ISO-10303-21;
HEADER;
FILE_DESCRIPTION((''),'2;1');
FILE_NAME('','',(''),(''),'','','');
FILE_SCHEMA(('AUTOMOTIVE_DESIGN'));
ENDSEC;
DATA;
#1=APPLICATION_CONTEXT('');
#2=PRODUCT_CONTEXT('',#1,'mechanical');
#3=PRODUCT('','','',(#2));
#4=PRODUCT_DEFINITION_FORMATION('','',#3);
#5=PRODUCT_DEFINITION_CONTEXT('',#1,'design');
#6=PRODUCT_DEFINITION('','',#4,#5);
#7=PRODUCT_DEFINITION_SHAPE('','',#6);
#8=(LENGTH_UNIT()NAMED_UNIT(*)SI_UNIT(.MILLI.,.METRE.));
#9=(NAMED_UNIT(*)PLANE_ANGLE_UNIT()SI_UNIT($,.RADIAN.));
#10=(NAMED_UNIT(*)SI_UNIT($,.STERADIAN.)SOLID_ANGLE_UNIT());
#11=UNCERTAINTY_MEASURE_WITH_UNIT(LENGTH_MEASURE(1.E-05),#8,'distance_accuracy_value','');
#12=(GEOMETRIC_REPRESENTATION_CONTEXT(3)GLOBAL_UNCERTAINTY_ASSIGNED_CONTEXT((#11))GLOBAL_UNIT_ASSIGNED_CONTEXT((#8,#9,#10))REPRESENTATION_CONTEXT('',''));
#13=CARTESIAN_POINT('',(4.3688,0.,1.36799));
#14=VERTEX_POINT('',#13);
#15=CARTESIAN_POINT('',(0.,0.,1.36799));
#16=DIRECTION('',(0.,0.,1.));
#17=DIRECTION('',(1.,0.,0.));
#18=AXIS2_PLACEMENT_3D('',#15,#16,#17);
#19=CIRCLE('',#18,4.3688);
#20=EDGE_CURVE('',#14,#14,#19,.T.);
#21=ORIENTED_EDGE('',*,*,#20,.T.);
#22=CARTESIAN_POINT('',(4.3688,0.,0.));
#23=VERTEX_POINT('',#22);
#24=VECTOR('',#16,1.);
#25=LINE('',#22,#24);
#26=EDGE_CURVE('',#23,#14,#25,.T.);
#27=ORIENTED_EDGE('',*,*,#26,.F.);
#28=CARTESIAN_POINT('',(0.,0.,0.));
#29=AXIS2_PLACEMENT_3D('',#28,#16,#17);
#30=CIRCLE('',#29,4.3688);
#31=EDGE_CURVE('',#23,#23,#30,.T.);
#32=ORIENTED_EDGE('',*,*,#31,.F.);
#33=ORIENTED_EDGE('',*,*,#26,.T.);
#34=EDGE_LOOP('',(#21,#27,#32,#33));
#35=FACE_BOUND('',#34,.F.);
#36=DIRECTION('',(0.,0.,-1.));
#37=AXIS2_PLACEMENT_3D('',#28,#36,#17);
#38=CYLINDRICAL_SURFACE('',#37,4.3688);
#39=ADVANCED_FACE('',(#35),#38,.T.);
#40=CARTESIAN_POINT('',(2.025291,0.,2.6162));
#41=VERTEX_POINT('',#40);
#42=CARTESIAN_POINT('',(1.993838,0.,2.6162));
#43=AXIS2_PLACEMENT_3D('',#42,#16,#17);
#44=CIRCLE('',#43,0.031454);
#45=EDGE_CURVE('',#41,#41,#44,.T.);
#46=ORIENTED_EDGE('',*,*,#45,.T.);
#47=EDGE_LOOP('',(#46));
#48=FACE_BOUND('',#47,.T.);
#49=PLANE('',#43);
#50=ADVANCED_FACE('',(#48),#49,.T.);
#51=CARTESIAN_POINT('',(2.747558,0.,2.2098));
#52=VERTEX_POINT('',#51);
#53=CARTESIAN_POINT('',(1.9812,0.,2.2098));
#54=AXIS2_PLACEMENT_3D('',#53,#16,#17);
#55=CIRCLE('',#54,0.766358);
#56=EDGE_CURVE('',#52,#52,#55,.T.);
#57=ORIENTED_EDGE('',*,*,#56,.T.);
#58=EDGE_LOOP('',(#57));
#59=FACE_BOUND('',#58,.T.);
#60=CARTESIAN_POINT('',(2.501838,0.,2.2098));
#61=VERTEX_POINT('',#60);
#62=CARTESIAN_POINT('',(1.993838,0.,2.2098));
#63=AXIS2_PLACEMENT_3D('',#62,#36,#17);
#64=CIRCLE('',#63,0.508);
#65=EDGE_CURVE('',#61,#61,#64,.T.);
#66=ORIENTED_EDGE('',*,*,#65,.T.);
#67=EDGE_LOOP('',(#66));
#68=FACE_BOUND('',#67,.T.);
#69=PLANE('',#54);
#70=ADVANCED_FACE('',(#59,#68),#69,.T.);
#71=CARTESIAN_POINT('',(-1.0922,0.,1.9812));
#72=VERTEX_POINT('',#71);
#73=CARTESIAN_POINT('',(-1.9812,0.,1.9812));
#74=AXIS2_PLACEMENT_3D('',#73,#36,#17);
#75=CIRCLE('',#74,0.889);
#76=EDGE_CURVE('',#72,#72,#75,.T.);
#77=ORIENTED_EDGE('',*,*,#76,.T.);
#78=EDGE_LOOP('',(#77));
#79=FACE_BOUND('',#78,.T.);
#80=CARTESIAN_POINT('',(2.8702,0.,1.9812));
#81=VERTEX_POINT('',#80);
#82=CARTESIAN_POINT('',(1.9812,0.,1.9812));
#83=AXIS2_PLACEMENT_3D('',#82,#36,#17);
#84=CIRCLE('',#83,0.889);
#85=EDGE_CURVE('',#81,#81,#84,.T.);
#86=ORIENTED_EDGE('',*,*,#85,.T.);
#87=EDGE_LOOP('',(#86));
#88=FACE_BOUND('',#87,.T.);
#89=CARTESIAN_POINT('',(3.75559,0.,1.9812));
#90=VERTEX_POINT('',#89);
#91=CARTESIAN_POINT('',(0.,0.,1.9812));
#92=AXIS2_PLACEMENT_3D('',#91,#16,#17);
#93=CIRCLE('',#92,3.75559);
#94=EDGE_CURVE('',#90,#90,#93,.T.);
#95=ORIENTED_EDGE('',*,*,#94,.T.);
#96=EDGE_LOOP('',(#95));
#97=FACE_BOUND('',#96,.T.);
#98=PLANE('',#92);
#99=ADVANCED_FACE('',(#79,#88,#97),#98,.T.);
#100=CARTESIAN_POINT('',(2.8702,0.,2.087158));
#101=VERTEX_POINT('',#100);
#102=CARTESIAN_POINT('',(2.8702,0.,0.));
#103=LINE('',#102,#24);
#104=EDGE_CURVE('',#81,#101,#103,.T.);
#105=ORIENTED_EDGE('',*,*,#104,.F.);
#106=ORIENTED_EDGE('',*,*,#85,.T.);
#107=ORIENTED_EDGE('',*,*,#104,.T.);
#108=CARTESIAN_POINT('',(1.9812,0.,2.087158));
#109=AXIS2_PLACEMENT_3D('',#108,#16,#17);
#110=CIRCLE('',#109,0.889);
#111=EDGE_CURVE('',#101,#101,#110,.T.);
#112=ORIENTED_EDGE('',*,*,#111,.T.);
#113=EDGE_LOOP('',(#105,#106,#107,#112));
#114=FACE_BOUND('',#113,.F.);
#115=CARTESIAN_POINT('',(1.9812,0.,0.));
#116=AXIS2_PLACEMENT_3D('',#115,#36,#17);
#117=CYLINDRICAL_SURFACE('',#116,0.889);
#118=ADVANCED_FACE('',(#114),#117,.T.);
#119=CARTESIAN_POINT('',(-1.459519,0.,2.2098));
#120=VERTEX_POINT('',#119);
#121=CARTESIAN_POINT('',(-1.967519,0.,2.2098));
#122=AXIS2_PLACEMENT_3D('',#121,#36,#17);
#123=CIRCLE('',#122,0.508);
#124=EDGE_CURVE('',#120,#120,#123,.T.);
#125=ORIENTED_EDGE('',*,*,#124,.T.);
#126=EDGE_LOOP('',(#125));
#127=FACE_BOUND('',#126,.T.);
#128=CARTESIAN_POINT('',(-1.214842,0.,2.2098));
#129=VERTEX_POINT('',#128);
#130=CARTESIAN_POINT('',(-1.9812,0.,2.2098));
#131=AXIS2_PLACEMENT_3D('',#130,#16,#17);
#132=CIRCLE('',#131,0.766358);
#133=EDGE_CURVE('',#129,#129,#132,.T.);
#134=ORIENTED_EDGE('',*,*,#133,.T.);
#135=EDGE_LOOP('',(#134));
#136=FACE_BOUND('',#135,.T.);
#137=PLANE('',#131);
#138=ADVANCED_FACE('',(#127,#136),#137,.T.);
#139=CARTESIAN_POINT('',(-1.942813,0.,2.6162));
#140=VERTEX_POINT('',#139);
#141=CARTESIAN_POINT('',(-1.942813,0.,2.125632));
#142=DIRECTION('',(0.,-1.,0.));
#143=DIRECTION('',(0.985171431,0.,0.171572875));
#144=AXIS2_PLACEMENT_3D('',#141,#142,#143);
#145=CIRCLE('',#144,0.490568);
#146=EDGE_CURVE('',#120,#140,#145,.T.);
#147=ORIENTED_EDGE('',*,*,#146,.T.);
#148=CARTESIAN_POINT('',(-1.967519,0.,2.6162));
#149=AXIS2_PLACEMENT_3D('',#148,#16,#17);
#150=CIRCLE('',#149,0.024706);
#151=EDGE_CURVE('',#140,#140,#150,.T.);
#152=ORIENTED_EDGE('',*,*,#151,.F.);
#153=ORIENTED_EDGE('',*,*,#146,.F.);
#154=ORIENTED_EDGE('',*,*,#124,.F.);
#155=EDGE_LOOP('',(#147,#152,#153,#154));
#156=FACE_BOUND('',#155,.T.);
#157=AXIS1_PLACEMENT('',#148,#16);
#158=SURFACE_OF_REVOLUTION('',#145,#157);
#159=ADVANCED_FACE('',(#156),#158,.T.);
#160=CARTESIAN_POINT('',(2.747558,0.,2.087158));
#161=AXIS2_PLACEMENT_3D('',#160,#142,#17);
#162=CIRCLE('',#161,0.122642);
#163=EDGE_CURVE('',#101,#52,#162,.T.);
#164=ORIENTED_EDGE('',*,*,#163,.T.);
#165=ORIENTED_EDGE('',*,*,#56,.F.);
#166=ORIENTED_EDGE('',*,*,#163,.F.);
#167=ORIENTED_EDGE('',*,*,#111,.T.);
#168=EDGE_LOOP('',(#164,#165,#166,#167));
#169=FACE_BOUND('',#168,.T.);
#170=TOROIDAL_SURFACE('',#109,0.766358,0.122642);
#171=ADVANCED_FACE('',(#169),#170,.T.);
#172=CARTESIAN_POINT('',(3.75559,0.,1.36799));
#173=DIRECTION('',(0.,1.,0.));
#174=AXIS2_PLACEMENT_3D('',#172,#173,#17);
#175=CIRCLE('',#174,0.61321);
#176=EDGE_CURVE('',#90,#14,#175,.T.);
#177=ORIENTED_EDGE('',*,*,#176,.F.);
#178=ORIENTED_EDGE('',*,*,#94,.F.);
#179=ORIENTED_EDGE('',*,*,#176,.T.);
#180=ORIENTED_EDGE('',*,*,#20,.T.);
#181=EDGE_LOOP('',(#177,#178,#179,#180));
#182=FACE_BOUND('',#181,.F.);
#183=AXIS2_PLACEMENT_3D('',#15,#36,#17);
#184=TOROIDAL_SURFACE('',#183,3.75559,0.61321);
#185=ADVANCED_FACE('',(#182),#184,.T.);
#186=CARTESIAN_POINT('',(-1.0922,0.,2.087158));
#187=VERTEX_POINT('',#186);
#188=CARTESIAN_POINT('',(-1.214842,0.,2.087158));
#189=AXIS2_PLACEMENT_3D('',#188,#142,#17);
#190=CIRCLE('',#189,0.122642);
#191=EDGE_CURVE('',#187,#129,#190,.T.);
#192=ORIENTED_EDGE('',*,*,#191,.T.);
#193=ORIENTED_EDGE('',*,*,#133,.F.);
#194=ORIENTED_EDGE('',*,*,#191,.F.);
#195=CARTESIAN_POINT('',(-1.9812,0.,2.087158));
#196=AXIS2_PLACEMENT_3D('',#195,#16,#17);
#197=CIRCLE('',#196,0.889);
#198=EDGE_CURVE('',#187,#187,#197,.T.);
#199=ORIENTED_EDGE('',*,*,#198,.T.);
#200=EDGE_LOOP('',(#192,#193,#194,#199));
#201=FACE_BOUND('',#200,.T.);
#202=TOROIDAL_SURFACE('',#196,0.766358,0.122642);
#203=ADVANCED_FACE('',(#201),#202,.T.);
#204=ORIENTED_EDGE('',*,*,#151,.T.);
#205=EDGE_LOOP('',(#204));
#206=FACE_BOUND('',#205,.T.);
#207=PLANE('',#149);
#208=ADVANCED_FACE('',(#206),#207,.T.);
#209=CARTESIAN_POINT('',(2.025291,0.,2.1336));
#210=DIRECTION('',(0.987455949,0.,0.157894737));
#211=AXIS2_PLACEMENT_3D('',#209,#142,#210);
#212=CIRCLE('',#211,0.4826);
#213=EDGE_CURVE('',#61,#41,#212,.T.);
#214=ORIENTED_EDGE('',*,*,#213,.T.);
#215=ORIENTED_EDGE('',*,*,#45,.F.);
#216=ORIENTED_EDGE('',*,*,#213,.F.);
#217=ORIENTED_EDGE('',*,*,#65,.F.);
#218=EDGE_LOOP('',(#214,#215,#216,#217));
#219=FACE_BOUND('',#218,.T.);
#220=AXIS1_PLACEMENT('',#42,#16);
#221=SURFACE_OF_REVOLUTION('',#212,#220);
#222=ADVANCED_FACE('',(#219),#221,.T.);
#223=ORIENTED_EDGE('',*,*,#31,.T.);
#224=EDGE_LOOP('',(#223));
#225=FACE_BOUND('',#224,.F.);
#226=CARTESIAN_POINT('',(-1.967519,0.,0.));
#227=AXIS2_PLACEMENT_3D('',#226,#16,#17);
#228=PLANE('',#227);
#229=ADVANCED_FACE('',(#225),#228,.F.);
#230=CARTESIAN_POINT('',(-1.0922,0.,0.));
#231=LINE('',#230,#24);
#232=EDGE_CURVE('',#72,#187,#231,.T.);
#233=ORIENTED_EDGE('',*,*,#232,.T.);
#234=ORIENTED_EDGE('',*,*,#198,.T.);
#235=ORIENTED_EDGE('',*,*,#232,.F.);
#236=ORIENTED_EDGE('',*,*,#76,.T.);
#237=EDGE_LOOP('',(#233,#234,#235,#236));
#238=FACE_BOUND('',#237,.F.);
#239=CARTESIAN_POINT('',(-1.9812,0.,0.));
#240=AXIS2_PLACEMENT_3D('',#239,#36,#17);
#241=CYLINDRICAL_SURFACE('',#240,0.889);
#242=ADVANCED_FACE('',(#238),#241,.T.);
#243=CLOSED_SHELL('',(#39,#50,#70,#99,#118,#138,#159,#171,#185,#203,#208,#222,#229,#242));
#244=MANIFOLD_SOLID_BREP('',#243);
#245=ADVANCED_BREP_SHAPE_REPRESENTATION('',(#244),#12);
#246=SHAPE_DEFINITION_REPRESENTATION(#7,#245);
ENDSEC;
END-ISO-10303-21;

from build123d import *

# Parameters (mm, degrees)
F0_R     = 4.3688
F1_DEPTH = 1.9812
F2_R     = 0.889
F3_DEPTH = 2.2098
F4_R     = 0.508
F5_DEPTH = 2.6162
F8_R     = 0.122642049
F9_R     = 0.6132102448


# Not quite as in the source:
# - a fillet or chamfer that OpenCascade refuses, or shapes differently, is made with other operations: its cross-section is extruded or revolved along the edge and cut away or added


with BuildPart() as f1:
    # F0 (on Top) → F1 (new body)
    with BuildSketch(Plane.XY):
        Circle(F0_R)
    extrude(amount=F1_DEPTH)

    # F2 (on Top) → F3 (join)
    with BuildSketch(Plane.XY):
        with Locations((-1.9812, 0)):
            Circle(F2_R)
        with Locations((1.9812, 0)):
            Circle(F2_R)
    extrude(amount=F3_DEPTH)

    # F4 (on Top) → F5 (join)
    with BuildSketch(Plane.XY):
        with Locations((-1.9675190561, 0)):
            Circle(F4_R)
        with Locations((1.9938375335, 0)):
            Circle(F4_R)
    extrude(amount=F5_DEPTH)

    # F6: fillet of radius 0.4905681959 on 1 edges, made by hand

    # F6_s1 → F6_t2 (revolve, cut)
    with BuildSketch(Plane.XZ):
        with BuildLine():
            ThreePointArc((-1.4595190561, 2.2098), (-1.6270859561, 2.5010964461), (-1.9428128276, 2.6162))
            Line((-1.9428128276, 2.6162), (-1.4595190561, 2.6162))
            Line((-1.4595190561, 2.6162), (-1.4595190561, 2.2098))
        make_face()
    revolve(axis=Axis((-1.9675190561, 0, 2.6162), (0, 0, 1)), mode=Mode.SUBTRACT)

    # F7: fillet of radius 0.4826 on 1 edges, made by hand

    # F7_s1 → F7_t2 (revolve, cut)
    with BuildSketch(Plane.XZ):
        with BuildLine():
            ThreePointArc((2.5018375335, 2.2098), (2.3384435237, 2.5008035403), (2.0252912923, 2.6162))
            Line((2.0252912923, 2.6162), (2.5018375335, 2.6162))
            Line((2.5018375335, 2.6162), (2.5018375335, 2.2098))
        make_face()
    revolve(axis=Axis((1.9938375335, 0, 2.6162), (0, 0, 1)), mode=Mode.SUBTRACT)

    # F8
    f8_edges = [f1.edges().sort_by_distance(p)[0] for p in [
        (-2.8702, 0, 2.2098),
        (1.0922, 0, 2.2098),
    ]]
    fillet(f8_edges, radius=F8_R)

    # F9
    f9_edges = [f1.edges().sort_by_distance(p)[0] for p in [
        (-4.3688, 0, 1.9812),
    ]]
    fillet(f9_edges, radius=F9_R)


solid = f1.part
